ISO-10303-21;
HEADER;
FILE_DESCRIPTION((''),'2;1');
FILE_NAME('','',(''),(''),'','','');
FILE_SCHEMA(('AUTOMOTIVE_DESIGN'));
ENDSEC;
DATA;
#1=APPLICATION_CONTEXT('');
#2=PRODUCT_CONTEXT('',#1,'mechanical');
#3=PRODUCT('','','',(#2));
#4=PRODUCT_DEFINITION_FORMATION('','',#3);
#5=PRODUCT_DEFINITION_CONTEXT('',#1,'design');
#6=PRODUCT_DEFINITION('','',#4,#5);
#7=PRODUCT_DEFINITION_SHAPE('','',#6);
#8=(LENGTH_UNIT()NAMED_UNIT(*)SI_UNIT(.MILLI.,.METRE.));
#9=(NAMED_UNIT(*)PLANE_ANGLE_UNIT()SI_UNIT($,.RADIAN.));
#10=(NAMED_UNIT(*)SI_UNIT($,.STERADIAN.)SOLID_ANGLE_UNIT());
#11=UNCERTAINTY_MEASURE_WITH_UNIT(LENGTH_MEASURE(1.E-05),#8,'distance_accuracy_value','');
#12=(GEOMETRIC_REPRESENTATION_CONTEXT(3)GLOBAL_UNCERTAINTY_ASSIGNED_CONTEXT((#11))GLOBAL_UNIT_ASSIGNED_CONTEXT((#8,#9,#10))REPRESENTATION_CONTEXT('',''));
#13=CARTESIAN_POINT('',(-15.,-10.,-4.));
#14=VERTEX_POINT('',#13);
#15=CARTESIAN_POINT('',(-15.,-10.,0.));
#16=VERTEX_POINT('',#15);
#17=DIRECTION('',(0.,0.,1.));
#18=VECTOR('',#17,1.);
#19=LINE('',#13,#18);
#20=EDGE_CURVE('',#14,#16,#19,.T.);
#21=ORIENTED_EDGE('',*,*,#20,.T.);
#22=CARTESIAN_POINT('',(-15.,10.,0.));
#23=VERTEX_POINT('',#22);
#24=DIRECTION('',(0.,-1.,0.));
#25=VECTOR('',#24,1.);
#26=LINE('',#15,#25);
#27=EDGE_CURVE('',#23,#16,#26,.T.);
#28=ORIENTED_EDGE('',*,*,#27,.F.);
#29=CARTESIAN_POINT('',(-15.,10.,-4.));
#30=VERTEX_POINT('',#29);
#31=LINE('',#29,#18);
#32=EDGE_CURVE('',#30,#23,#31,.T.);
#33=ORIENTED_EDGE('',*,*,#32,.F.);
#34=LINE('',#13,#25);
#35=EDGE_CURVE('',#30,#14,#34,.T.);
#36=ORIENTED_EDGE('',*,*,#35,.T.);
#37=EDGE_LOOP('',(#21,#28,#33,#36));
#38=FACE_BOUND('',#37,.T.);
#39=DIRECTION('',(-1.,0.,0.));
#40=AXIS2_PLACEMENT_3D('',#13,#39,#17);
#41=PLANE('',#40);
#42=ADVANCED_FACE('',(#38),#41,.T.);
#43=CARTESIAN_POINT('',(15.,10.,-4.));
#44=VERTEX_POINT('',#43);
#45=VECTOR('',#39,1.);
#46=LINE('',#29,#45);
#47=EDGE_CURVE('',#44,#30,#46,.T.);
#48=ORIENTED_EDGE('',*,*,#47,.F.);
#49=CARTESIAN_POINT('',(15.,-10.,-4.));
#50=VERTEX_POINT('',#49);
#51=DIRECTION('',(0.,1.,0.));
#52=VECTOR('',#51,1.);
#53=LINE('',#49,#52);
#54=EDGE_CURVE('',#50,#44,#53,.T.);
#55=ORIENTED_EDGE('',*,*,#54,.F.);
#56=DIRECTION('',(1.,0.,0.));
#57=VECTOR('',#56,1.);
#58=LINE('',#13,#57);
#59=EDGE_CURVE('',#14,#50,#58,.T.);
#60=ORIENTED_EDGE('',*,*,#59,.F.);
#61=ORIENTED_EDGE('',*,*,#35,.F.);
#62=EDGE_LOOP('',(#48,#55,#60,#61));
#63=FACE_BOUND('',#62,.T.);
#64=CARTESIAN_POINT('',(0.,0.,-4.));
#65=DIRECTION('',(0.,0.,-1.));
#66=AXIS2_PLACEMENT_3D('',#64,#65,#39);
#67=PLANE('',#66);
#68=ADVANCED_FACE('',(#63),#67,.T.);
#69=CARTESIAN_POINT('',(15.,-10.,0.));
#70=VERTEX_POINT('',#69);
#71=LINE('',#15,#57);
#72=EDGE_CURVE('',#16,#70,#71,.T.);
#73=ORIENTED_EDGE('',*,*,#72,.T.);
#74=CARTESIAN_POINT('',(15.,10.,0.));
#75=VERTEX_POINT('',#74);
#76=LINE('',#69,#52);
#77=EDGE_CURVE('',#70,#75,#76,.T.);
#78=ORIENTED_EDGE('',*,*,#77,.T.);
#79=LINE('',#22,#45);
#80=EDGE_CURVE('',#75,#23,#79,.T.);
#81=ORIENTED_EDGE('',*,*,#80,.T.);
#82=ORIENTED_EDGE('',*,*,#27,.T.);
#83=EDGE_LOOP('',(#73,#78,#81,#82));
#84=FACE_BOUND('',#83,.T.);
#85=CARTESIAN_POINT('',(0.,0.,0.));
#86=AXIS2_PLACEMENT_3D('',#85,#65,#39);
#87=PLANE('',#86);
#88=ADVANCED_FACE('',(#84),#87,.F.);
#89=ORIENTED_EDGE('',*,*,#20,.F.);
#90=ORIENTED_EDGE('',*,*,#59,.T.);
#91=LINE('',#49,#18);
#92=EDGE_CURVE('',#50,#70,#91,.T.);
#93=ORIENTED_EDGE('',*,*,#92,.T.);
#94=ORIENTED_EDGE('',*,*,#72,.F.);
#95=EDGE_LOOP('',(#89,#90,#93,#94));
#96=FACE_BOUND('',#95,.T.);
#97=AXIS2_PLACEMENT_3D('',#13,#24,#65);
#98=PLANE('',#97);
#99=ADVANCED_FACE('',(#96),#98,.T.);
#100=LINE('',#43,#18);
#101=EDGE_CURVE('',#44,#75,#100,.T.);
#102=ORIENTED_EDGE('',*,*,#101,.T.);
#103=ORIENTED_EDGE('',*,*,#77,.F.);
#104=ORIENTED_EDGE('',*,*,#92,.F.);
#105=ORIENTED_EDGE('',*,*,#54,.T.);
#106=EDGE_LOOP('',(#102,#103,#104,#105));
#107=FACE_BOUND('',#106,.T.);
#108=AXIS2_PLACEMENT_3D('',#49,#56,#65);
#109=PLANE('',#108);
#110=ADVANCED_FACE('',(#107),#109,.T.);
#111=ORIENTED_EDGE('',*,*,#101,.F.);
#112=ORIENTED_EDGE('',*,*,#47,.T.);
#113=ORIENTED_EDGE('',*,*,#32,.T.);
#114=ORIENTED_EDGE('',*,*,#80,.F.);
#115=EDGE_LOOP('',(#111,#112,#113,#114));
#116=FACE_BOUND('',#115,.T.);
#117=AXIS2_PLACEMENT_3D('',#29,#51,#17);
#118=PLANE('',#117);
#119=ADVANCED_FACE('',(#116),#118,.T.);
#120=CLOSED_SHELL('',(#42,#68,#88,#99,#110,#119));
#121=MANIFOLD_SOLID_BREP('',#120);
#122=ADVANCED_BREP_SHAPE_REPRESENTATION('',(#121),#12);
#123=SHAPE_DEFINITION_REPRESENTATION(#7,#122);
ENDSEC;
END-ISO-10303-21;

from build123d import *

# Parameters (mm, degrees)
SKETCH_1_W             = 30
SKETCH_1_H             = 20
SM_BASE_FLANGE_1_DEPTH = 4


# Sheet-metal steps are written as plain solids
with BuildPart() as part:
    # Sketch 1 → Базовая кромка1 (new body)
    with BuildSketch(Plane.XY):
        Rectangle(SKETCH_1_W, SKETCH_1_H)
    extrude(amount=-SM_BASE_FLANGE_1_DEPTH)


solid = part.part
